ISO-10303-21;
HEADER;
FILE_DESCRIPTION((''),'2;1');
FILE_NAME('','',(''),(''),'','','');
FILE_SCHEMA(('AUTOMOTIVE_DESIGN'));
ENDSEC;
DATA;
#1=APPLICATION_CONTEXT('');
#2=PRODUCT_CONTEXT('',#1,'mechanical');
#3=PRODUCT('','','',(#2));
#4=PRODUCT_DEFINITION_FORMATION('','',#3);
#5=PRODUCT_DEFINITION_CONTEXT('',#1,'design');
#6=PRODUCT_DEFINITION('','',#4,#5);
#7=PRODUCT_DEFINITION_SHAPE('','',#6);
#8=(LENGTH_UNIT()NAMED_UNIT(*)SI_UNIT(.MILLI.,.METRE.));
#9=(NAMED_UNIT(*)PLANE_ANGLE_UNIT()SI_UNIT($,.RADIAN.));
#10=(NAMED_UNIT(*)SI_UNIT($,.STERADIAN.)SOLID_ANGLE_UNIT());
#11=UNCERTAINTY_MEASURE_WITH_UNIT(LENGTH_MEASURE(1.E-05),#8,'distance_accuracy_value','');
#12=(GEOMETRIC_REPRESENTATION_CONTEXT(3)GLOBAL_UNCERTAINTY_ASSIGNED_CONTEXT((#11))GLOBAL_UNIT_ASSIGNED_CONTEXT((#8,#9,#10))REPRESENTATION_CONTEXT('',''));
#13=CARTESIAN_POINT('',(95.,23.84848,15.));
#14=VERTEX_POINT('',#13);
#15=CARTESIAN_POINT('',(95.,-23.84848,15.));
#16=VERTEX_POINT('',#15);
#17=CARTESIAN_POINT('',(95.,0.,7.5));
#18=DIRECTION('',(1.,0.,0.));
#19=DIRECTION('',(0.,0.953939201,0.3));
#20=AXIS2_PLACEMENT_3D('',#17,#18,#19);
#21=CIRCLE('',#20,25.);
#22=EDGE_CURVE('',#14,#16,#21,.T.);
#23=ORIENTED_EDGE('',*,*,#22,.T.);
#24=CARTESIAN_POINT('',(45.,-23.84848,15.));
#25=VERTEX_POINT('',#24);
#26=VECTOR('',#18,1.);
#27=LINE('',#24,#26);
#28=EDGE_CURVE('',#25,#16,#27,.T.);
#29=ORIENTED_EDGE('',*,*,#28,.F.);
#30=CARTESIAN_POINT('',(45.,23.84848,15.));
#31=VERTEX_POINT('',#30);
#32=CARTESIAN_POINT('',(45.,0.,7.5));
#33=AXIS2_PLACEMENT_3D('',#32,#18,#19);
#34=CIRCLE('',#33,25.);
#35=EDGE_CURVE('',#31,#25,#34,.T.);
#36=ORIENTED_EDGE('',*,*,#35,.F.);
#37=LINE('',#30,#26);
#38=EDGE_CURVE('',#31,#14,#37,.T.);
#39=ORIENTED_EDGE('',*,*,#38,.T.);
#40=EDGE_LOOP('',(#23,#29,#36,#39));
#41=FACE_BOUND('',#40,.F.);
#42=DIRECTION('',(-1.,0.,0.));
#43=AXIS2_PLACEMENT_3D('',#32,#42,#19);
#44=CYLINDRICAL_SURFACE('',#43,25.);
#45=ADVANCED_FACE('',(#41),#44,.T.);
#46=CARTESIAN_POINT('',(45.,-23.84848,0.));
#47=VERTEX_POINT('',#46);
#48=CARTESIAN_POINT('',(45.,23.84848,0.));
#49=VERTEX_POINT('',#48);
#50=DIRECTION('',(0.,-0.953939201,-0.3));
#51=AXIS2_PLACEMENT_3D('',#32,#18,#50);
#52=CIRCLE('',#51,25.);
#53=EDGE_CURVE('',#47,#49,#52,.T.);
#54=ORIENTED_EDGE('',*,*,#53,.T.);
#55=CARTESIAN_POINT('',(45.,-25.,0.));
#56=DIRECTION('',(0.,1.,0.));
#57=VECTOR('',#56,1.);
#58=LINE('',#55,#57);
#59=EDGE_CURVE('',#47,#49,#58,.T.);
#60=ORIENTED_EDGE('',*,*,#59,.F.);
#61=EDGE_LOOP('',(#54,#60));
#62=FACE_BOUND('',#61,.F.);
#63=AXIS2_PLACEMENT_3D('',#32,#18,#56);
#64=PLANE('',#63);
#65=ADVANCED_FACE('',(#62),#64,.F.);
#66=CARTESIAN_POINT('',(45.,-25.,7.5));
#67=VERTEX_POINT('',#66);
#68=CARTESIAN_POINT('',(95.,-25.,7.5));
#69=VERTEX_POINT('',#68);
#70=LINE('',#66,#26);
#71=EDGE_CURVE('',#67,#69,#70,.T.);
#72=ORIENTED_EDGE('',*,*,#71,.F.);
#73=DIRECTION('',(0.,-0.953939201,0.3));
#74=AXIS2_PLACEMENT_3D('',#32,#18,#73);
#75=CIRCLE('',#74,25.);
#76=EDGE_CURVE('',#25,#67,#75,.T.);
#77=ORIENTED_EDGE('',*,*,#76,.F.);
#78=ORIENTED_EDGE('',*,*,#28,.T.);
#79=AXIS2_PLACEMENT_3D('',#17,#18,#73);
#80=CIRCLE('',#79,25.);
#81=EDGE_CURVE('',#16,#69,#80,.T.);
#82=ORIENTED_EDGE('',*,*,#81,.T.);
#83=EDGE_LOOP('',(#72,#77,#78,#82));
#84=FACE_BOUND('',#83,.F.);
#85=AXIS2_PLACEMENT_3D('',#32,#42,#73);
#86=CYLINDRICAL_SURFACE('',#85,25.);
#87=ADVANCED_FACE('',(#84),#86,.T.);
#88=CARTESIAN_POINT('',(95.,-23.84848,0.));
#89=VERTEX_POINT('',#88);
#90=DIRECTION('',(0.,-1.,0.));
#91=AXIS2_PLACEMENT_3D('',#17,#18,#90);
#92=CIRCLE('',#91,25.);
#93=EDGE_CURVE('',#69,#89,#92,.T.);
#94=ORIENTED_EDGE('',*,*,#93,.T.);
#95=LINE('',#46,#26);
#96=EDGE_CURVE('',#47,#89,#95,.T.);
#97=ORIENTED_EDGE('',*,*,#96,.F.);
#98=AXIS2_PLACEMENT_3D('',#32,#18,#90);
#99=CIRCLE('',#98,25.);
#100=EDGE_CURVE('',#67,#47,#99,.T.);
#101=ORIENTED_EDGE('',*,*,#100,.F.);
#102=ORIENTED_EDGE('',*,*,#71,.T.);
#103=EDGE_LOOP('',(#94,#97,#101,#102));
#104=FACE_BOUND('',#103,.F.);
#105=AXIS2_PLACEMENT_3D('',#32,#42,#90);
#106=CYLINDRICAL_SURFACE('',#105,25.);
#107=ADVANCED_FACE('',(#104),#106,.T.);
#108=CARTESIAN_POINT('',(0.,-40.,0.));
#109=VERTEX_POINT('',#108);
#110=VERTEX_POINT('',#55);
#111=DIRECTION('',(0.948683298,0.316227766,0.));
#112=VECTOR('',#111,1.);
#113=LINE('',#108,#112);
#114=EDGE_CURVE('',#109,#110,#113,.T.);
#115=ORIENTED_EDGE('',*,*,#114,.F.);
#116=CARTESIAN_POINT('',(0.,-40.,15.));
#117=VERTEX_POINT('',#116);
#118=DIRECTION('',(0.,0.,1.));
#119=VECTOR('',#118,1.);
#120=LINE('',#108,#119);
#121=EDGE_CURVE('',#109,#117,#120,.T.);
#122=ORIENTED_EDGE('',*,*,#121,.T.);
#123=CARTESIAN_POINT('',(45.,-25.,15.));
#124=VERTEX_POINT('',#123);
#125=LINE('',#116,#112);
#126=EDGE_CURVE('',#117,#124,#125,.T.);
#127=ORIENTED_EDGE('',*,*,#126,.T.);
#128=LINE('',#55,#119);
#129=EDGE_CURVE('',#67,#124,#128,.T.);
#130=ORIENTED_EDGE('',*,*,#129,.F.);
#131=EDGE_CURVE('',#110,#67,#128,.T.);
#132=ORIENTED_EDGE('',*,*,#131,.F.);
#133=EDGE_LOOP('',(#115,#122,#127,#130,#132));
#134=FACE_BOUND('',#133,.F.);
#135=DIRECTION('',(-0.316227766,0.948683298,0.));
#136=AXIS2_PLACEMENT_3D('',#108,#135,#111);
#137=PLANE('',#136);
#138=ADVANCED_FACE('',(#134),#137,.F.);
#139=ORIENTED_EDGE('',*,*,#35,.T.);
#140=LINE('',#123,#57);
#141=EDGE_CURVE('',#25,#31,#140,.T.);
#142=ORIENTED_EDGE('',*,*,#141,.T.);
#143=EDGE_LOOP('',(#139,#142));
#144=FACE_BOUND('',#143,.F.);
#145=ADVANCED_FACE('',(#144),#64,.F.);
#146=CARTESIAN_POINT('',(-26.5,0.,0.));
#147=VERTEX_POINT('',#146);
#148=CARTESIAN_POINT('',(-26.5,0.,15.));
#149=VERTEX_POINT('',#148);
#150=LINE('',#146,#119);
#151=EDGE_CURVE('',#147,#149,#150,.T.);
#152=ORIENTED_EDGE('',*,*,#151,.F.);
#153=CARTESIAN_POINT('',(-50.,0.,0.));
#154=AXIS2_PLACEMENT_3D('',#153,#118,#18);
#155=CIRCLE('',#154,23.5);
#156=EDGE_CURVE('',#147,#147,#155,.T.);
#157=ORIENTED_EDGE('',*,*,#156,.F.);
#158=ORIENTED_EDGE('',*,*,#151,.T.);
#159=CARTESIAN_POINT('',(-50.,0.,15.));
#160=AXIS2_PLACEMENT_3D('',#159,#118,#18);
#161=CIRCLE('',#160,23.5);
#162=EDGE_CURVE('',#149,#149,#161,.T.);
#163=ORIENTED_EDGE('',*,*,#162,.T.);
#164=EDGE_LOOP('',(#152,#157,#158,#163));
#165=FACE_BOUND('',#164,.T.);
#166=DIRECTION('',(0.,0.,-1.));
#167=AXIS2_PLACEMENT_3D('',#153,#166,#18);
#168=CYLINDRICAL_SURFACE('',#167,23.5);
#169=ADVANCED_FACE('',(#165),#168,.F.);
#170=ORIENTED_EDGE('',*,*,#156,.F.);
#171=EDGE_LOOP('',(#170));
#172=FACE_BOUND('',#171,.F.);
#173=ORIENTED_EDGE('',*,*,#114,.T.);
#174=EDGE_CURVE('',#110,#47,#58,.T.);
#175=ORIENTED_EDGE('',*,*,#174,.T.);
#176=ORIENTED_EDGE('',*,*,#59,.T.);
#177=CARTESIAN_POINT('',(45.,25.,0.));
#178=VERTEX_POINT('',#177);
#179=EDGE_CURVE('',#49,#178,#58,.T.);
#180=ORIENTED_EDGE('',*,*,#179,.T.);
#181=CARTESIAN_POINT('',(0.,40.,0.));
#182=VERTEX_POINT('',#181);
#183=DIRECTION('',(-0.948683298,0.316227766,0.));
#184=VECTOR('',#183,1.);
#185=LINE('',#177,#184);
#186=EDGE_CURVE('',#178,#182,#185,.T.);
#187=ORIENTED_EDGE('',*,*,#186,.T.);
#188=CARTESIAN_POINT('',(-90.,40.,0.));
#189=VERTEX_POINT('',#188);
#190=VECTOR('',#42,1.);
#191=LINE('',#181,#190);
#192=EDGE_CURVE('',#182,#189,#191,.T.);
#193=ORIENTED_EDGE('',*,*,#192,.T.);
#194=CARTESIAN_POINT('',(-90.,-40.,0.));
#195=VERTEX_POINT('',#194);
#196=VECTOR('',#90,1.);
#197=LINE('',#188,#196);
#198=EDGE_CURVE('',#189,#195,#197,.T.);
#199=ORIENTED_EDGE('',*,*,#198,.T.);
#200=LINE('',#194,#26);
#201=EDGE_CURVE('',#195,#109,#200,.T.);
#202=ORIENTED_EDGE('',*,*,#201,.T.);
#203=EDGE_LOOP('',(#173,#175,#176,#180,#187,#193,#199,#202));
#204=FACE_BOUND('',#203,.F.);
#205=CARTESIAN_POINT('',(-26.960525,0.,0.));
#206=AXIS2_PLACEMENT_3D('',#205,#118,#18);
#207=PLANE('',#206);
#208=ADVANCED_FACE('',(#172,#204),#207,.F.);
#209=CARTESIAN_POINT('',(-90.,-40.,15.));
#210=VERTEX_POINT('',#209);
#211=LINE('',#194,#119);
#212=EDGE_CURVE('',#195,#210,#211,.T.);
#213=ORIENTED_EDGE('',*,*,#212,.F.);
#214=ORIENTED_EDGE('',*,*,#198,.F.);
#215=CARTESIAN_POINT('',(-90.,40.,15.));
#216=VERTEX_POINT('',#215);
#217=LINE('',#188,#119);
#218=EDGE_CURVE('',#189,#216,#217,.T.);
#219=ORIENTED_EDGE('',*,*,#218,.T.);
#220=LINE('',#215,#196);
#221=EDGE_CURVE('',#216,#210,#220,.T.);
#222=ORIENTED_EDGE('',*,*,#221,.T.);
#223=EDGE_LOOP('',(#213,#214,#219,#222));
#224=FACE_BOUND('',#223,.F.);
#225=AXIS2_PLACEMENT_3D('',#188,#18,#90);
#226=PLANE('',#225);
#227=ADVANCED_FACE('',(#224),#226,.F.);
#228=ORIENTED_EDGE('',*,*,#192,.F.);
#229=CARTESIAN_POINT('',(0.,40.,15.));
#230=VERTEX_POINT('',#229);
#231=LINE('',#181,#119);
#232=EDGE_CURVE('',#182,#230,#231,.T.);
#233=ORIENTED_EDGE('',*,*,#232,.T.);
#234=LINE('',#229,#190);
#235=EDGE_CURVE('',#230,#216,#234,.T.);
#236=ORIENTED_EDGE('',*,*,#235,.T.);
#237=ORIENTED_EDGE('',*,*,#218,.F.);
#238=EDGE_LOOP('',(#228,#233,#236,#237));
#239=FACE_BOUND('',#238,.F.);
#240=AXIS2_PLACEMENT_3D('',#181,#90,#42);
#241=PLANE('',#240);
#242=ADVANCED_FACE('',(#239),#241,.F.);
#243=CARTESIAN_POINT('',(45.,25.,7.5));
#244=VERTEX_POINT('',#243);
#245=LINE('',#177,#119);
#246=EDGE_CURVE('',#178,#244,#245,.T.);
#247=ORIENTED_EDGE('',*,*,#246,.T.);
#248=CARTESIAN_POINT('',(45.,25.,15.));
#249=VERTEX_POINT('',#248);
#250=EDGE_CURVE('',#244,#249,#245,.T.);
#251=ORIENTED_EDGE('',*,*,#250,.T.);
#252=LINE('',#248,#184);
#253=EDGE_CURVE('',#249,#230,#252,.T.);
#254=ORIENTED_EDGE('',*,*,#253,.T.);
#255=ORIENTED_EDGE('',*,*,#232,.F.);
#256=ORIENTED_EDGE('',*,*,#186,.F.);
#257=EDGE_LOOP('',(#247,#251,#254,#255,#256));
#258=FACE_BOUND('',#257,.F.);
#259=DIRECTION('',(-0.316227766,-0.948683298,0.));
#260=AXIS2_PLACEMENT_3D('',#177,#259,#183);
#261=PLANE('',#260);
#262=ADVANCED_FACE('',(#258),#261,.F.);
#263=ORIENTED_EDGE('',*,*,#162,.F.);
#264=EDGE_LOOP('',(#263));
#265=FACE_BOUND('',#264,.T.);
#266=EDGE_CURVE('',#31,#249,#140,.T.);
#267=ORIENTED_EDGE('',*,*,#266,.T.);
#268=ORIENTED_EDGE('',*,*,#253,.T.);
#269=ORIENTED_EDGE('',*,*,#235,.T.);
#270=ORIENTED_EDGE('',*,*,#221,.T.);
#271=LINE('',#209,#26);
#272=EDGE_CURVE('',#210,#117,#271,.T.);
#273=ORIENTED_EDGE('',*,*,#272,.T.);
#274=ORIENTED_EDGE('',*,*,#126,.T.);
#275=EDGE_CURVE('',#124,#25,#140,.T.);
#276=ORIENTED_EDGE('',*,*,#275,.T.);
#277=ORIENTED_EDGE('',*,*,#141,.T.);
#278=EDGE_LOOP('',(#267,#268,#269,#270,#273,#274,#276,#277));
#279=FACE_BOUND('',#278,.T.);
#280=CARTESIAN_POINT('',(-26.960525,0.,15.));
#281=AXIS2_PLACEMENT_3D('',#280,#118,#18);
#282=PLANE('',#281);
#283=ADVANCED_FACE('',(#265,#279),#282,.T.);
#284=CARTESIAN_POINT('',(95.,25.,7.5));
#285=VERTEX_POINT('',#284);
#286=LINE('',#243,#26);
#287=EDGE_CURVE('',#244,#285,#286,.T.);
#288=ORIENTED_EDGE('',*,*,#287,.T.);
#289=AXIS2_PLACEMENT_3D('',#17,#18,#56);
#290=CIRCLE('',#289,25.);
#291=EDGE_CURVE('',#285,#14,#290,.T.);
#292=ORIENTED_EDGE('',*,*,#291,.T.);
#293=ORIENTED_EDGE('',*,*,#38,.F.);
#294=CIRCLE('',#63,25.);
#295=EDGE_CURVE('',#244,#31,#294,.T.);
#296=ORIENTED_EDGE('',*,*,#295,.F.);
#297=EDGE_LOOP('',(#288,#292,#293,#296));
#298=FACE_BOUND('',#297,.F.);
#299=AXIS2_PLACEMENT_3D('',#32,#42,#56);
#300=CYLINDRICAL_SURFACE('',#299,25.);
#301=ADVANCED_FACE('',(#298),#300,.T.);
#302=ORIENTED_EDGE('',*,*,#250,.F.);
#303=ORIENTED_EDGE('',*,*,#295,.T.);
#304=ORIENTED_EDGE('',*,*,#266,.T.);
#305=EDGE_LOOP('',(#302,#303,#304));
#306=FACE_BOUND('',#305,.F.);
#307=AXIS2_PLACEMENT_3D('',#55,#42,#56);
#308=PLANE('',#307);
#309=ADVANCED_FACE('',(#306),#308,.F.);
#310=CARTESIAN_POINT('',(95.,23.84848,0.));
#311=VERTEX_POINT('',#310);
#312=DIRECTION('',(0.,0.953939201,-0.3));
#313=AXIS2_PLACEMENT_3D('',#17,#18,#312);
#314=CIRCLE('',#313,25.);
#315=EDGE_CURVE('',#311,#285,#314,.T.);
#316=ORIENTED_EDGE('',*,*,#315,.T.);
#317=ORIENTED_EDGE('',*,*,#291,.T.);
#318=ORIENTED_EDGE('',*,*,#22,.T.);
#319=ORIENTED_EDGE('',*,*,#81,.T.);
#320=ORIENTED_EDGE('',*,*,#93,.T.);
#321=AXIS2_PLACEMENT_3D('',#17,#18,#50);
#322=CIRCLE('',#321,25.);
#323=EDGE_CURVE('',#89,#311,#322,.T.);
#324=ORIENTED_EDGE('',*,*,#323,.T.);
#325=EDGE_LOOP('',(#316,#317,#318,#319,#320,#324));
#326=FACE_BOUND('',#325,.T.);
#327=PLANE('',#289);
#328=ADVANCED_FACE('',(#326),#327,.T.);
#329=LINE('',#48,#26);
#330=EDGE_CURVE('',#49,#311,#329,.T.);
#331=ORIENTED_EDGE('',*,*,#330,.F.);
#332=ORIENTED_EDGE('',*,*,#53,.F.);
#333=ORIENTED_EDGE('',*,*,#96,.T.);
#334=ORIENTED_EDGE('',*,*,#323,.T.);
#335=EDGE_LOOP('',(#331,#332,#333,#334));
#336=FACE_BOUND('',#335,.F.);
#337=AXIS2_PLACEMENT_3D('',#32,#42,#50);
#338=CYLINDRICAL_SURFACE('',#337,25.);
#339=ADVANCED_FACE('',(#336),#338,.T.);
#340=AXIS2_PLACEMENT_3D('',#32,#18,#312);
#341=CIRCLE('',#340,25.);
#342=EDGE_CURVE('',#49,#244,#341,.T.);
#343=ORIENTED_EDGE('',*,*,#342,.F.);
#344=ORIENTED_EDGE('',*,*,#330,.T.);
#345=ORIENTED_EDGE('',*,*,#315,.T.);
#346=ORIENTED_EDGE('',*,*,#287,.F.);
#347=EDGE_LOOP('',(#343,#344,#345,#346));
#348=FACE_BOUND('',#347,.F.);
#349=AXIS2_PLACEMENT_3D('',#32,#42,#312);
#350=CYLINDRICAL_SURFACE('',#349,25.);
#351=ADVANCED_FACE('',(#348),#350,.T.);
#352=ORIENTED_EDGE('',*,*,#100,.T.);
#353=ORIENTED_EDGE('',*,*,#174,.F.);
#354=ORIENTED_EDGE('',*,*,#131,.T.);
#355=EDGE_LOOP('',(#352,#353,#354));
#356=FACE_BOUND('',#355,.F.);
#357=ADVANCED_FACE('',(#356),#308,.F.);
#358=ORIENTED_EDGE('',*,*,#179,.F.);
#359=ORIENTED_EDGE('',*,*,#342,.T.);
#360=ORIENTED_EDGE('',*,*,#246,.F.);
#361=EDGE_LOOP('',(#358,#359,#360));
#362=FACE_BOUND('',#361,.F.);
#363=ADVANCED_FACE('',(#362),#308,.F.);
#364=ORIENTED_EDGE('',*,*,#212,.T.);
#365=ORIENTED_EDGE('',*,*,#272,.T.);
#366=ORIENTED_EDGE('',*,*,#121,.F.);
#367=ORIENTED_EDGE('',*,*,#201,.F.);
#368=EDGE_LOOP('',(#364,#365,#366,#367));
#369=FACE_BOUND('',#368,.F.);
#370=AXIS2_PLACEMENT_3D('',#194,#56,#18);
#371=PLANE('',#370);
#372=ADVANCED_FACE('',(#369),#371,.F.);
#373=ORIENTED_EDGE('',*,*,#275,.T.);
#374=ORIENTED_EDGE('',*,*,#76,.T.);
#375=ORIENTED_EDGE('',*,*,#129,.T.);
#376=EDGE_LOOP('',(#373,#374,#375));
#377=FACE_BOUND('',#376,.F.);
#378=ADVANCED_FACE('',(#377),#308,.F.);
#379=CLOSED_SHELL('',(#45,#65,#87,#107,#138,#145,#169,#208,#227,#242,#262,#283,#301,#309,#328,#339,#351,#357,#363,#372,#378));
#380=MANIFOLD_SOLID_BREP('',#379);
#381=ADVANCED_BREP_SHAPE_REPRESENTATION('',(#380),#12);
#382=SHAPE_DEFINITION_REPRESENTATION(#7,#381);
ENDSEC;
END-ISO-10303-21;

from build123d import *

# Parameters (mm, degrees)
F0_R     = 23.5
F1_DEPTH = 15
F3_DEPTH = 50


with BuildPart() as f1:
    # F0 (on Top) → F1 (new body)
    with BuildSketch(Plane.XY):
        Polygon((-90, -40), (0, -40), (45, -25), (45, 25), (0, 40), (-90, 40), align=None)
        with Locations((-50, 0)):
            Circle(F0_R, mode=Mode.SUBTRACT)
    extrude(amount=F1_DEPTH)

    # F2 (on face) → F3 (join)
    with BuildSketch(Plane.YZ.offset(45)):
        with BuildLine():
            ThreePointArc((23.8484800354, 0), (24.7104431454, 3.7060575179), (25, 7.5))
            ThreePointArc((25, 7.5), (24.7104431454, 11.2939424821), (23.8484800354, 15))
            Line((23.8484800354, 15), (-23.8484800354, 15))
            ThreePointArc((-23.8484800354, 15), (-24.7104431454, 11.2939424821), (-25, 7.5))
            ThreePointArc((-25, 7.5), (-24.7104431454, 3.7060575179), (-23.8484800354, 0))
            Line((-23.8484800354, 0), (23.8484800354, 0))
        make_face()
        with BuildLine():
            Line((-23.8484800354, 15), (23.8484800354, 15))
            ThreePointArc((23.8484800354, 15), (0, 32.5), (-23.8484800354, 15))
        make_face()
        with BuildLine():
            ThreePointArc((-23.8484800354, 0), (0, -17.5), (23.8484800354, 0))
            Line((23.8484800354, 0), (-23.8484800354, 0))
        make_face()
    extrude(amount=F3_DEPTH)


solid = f1.part
